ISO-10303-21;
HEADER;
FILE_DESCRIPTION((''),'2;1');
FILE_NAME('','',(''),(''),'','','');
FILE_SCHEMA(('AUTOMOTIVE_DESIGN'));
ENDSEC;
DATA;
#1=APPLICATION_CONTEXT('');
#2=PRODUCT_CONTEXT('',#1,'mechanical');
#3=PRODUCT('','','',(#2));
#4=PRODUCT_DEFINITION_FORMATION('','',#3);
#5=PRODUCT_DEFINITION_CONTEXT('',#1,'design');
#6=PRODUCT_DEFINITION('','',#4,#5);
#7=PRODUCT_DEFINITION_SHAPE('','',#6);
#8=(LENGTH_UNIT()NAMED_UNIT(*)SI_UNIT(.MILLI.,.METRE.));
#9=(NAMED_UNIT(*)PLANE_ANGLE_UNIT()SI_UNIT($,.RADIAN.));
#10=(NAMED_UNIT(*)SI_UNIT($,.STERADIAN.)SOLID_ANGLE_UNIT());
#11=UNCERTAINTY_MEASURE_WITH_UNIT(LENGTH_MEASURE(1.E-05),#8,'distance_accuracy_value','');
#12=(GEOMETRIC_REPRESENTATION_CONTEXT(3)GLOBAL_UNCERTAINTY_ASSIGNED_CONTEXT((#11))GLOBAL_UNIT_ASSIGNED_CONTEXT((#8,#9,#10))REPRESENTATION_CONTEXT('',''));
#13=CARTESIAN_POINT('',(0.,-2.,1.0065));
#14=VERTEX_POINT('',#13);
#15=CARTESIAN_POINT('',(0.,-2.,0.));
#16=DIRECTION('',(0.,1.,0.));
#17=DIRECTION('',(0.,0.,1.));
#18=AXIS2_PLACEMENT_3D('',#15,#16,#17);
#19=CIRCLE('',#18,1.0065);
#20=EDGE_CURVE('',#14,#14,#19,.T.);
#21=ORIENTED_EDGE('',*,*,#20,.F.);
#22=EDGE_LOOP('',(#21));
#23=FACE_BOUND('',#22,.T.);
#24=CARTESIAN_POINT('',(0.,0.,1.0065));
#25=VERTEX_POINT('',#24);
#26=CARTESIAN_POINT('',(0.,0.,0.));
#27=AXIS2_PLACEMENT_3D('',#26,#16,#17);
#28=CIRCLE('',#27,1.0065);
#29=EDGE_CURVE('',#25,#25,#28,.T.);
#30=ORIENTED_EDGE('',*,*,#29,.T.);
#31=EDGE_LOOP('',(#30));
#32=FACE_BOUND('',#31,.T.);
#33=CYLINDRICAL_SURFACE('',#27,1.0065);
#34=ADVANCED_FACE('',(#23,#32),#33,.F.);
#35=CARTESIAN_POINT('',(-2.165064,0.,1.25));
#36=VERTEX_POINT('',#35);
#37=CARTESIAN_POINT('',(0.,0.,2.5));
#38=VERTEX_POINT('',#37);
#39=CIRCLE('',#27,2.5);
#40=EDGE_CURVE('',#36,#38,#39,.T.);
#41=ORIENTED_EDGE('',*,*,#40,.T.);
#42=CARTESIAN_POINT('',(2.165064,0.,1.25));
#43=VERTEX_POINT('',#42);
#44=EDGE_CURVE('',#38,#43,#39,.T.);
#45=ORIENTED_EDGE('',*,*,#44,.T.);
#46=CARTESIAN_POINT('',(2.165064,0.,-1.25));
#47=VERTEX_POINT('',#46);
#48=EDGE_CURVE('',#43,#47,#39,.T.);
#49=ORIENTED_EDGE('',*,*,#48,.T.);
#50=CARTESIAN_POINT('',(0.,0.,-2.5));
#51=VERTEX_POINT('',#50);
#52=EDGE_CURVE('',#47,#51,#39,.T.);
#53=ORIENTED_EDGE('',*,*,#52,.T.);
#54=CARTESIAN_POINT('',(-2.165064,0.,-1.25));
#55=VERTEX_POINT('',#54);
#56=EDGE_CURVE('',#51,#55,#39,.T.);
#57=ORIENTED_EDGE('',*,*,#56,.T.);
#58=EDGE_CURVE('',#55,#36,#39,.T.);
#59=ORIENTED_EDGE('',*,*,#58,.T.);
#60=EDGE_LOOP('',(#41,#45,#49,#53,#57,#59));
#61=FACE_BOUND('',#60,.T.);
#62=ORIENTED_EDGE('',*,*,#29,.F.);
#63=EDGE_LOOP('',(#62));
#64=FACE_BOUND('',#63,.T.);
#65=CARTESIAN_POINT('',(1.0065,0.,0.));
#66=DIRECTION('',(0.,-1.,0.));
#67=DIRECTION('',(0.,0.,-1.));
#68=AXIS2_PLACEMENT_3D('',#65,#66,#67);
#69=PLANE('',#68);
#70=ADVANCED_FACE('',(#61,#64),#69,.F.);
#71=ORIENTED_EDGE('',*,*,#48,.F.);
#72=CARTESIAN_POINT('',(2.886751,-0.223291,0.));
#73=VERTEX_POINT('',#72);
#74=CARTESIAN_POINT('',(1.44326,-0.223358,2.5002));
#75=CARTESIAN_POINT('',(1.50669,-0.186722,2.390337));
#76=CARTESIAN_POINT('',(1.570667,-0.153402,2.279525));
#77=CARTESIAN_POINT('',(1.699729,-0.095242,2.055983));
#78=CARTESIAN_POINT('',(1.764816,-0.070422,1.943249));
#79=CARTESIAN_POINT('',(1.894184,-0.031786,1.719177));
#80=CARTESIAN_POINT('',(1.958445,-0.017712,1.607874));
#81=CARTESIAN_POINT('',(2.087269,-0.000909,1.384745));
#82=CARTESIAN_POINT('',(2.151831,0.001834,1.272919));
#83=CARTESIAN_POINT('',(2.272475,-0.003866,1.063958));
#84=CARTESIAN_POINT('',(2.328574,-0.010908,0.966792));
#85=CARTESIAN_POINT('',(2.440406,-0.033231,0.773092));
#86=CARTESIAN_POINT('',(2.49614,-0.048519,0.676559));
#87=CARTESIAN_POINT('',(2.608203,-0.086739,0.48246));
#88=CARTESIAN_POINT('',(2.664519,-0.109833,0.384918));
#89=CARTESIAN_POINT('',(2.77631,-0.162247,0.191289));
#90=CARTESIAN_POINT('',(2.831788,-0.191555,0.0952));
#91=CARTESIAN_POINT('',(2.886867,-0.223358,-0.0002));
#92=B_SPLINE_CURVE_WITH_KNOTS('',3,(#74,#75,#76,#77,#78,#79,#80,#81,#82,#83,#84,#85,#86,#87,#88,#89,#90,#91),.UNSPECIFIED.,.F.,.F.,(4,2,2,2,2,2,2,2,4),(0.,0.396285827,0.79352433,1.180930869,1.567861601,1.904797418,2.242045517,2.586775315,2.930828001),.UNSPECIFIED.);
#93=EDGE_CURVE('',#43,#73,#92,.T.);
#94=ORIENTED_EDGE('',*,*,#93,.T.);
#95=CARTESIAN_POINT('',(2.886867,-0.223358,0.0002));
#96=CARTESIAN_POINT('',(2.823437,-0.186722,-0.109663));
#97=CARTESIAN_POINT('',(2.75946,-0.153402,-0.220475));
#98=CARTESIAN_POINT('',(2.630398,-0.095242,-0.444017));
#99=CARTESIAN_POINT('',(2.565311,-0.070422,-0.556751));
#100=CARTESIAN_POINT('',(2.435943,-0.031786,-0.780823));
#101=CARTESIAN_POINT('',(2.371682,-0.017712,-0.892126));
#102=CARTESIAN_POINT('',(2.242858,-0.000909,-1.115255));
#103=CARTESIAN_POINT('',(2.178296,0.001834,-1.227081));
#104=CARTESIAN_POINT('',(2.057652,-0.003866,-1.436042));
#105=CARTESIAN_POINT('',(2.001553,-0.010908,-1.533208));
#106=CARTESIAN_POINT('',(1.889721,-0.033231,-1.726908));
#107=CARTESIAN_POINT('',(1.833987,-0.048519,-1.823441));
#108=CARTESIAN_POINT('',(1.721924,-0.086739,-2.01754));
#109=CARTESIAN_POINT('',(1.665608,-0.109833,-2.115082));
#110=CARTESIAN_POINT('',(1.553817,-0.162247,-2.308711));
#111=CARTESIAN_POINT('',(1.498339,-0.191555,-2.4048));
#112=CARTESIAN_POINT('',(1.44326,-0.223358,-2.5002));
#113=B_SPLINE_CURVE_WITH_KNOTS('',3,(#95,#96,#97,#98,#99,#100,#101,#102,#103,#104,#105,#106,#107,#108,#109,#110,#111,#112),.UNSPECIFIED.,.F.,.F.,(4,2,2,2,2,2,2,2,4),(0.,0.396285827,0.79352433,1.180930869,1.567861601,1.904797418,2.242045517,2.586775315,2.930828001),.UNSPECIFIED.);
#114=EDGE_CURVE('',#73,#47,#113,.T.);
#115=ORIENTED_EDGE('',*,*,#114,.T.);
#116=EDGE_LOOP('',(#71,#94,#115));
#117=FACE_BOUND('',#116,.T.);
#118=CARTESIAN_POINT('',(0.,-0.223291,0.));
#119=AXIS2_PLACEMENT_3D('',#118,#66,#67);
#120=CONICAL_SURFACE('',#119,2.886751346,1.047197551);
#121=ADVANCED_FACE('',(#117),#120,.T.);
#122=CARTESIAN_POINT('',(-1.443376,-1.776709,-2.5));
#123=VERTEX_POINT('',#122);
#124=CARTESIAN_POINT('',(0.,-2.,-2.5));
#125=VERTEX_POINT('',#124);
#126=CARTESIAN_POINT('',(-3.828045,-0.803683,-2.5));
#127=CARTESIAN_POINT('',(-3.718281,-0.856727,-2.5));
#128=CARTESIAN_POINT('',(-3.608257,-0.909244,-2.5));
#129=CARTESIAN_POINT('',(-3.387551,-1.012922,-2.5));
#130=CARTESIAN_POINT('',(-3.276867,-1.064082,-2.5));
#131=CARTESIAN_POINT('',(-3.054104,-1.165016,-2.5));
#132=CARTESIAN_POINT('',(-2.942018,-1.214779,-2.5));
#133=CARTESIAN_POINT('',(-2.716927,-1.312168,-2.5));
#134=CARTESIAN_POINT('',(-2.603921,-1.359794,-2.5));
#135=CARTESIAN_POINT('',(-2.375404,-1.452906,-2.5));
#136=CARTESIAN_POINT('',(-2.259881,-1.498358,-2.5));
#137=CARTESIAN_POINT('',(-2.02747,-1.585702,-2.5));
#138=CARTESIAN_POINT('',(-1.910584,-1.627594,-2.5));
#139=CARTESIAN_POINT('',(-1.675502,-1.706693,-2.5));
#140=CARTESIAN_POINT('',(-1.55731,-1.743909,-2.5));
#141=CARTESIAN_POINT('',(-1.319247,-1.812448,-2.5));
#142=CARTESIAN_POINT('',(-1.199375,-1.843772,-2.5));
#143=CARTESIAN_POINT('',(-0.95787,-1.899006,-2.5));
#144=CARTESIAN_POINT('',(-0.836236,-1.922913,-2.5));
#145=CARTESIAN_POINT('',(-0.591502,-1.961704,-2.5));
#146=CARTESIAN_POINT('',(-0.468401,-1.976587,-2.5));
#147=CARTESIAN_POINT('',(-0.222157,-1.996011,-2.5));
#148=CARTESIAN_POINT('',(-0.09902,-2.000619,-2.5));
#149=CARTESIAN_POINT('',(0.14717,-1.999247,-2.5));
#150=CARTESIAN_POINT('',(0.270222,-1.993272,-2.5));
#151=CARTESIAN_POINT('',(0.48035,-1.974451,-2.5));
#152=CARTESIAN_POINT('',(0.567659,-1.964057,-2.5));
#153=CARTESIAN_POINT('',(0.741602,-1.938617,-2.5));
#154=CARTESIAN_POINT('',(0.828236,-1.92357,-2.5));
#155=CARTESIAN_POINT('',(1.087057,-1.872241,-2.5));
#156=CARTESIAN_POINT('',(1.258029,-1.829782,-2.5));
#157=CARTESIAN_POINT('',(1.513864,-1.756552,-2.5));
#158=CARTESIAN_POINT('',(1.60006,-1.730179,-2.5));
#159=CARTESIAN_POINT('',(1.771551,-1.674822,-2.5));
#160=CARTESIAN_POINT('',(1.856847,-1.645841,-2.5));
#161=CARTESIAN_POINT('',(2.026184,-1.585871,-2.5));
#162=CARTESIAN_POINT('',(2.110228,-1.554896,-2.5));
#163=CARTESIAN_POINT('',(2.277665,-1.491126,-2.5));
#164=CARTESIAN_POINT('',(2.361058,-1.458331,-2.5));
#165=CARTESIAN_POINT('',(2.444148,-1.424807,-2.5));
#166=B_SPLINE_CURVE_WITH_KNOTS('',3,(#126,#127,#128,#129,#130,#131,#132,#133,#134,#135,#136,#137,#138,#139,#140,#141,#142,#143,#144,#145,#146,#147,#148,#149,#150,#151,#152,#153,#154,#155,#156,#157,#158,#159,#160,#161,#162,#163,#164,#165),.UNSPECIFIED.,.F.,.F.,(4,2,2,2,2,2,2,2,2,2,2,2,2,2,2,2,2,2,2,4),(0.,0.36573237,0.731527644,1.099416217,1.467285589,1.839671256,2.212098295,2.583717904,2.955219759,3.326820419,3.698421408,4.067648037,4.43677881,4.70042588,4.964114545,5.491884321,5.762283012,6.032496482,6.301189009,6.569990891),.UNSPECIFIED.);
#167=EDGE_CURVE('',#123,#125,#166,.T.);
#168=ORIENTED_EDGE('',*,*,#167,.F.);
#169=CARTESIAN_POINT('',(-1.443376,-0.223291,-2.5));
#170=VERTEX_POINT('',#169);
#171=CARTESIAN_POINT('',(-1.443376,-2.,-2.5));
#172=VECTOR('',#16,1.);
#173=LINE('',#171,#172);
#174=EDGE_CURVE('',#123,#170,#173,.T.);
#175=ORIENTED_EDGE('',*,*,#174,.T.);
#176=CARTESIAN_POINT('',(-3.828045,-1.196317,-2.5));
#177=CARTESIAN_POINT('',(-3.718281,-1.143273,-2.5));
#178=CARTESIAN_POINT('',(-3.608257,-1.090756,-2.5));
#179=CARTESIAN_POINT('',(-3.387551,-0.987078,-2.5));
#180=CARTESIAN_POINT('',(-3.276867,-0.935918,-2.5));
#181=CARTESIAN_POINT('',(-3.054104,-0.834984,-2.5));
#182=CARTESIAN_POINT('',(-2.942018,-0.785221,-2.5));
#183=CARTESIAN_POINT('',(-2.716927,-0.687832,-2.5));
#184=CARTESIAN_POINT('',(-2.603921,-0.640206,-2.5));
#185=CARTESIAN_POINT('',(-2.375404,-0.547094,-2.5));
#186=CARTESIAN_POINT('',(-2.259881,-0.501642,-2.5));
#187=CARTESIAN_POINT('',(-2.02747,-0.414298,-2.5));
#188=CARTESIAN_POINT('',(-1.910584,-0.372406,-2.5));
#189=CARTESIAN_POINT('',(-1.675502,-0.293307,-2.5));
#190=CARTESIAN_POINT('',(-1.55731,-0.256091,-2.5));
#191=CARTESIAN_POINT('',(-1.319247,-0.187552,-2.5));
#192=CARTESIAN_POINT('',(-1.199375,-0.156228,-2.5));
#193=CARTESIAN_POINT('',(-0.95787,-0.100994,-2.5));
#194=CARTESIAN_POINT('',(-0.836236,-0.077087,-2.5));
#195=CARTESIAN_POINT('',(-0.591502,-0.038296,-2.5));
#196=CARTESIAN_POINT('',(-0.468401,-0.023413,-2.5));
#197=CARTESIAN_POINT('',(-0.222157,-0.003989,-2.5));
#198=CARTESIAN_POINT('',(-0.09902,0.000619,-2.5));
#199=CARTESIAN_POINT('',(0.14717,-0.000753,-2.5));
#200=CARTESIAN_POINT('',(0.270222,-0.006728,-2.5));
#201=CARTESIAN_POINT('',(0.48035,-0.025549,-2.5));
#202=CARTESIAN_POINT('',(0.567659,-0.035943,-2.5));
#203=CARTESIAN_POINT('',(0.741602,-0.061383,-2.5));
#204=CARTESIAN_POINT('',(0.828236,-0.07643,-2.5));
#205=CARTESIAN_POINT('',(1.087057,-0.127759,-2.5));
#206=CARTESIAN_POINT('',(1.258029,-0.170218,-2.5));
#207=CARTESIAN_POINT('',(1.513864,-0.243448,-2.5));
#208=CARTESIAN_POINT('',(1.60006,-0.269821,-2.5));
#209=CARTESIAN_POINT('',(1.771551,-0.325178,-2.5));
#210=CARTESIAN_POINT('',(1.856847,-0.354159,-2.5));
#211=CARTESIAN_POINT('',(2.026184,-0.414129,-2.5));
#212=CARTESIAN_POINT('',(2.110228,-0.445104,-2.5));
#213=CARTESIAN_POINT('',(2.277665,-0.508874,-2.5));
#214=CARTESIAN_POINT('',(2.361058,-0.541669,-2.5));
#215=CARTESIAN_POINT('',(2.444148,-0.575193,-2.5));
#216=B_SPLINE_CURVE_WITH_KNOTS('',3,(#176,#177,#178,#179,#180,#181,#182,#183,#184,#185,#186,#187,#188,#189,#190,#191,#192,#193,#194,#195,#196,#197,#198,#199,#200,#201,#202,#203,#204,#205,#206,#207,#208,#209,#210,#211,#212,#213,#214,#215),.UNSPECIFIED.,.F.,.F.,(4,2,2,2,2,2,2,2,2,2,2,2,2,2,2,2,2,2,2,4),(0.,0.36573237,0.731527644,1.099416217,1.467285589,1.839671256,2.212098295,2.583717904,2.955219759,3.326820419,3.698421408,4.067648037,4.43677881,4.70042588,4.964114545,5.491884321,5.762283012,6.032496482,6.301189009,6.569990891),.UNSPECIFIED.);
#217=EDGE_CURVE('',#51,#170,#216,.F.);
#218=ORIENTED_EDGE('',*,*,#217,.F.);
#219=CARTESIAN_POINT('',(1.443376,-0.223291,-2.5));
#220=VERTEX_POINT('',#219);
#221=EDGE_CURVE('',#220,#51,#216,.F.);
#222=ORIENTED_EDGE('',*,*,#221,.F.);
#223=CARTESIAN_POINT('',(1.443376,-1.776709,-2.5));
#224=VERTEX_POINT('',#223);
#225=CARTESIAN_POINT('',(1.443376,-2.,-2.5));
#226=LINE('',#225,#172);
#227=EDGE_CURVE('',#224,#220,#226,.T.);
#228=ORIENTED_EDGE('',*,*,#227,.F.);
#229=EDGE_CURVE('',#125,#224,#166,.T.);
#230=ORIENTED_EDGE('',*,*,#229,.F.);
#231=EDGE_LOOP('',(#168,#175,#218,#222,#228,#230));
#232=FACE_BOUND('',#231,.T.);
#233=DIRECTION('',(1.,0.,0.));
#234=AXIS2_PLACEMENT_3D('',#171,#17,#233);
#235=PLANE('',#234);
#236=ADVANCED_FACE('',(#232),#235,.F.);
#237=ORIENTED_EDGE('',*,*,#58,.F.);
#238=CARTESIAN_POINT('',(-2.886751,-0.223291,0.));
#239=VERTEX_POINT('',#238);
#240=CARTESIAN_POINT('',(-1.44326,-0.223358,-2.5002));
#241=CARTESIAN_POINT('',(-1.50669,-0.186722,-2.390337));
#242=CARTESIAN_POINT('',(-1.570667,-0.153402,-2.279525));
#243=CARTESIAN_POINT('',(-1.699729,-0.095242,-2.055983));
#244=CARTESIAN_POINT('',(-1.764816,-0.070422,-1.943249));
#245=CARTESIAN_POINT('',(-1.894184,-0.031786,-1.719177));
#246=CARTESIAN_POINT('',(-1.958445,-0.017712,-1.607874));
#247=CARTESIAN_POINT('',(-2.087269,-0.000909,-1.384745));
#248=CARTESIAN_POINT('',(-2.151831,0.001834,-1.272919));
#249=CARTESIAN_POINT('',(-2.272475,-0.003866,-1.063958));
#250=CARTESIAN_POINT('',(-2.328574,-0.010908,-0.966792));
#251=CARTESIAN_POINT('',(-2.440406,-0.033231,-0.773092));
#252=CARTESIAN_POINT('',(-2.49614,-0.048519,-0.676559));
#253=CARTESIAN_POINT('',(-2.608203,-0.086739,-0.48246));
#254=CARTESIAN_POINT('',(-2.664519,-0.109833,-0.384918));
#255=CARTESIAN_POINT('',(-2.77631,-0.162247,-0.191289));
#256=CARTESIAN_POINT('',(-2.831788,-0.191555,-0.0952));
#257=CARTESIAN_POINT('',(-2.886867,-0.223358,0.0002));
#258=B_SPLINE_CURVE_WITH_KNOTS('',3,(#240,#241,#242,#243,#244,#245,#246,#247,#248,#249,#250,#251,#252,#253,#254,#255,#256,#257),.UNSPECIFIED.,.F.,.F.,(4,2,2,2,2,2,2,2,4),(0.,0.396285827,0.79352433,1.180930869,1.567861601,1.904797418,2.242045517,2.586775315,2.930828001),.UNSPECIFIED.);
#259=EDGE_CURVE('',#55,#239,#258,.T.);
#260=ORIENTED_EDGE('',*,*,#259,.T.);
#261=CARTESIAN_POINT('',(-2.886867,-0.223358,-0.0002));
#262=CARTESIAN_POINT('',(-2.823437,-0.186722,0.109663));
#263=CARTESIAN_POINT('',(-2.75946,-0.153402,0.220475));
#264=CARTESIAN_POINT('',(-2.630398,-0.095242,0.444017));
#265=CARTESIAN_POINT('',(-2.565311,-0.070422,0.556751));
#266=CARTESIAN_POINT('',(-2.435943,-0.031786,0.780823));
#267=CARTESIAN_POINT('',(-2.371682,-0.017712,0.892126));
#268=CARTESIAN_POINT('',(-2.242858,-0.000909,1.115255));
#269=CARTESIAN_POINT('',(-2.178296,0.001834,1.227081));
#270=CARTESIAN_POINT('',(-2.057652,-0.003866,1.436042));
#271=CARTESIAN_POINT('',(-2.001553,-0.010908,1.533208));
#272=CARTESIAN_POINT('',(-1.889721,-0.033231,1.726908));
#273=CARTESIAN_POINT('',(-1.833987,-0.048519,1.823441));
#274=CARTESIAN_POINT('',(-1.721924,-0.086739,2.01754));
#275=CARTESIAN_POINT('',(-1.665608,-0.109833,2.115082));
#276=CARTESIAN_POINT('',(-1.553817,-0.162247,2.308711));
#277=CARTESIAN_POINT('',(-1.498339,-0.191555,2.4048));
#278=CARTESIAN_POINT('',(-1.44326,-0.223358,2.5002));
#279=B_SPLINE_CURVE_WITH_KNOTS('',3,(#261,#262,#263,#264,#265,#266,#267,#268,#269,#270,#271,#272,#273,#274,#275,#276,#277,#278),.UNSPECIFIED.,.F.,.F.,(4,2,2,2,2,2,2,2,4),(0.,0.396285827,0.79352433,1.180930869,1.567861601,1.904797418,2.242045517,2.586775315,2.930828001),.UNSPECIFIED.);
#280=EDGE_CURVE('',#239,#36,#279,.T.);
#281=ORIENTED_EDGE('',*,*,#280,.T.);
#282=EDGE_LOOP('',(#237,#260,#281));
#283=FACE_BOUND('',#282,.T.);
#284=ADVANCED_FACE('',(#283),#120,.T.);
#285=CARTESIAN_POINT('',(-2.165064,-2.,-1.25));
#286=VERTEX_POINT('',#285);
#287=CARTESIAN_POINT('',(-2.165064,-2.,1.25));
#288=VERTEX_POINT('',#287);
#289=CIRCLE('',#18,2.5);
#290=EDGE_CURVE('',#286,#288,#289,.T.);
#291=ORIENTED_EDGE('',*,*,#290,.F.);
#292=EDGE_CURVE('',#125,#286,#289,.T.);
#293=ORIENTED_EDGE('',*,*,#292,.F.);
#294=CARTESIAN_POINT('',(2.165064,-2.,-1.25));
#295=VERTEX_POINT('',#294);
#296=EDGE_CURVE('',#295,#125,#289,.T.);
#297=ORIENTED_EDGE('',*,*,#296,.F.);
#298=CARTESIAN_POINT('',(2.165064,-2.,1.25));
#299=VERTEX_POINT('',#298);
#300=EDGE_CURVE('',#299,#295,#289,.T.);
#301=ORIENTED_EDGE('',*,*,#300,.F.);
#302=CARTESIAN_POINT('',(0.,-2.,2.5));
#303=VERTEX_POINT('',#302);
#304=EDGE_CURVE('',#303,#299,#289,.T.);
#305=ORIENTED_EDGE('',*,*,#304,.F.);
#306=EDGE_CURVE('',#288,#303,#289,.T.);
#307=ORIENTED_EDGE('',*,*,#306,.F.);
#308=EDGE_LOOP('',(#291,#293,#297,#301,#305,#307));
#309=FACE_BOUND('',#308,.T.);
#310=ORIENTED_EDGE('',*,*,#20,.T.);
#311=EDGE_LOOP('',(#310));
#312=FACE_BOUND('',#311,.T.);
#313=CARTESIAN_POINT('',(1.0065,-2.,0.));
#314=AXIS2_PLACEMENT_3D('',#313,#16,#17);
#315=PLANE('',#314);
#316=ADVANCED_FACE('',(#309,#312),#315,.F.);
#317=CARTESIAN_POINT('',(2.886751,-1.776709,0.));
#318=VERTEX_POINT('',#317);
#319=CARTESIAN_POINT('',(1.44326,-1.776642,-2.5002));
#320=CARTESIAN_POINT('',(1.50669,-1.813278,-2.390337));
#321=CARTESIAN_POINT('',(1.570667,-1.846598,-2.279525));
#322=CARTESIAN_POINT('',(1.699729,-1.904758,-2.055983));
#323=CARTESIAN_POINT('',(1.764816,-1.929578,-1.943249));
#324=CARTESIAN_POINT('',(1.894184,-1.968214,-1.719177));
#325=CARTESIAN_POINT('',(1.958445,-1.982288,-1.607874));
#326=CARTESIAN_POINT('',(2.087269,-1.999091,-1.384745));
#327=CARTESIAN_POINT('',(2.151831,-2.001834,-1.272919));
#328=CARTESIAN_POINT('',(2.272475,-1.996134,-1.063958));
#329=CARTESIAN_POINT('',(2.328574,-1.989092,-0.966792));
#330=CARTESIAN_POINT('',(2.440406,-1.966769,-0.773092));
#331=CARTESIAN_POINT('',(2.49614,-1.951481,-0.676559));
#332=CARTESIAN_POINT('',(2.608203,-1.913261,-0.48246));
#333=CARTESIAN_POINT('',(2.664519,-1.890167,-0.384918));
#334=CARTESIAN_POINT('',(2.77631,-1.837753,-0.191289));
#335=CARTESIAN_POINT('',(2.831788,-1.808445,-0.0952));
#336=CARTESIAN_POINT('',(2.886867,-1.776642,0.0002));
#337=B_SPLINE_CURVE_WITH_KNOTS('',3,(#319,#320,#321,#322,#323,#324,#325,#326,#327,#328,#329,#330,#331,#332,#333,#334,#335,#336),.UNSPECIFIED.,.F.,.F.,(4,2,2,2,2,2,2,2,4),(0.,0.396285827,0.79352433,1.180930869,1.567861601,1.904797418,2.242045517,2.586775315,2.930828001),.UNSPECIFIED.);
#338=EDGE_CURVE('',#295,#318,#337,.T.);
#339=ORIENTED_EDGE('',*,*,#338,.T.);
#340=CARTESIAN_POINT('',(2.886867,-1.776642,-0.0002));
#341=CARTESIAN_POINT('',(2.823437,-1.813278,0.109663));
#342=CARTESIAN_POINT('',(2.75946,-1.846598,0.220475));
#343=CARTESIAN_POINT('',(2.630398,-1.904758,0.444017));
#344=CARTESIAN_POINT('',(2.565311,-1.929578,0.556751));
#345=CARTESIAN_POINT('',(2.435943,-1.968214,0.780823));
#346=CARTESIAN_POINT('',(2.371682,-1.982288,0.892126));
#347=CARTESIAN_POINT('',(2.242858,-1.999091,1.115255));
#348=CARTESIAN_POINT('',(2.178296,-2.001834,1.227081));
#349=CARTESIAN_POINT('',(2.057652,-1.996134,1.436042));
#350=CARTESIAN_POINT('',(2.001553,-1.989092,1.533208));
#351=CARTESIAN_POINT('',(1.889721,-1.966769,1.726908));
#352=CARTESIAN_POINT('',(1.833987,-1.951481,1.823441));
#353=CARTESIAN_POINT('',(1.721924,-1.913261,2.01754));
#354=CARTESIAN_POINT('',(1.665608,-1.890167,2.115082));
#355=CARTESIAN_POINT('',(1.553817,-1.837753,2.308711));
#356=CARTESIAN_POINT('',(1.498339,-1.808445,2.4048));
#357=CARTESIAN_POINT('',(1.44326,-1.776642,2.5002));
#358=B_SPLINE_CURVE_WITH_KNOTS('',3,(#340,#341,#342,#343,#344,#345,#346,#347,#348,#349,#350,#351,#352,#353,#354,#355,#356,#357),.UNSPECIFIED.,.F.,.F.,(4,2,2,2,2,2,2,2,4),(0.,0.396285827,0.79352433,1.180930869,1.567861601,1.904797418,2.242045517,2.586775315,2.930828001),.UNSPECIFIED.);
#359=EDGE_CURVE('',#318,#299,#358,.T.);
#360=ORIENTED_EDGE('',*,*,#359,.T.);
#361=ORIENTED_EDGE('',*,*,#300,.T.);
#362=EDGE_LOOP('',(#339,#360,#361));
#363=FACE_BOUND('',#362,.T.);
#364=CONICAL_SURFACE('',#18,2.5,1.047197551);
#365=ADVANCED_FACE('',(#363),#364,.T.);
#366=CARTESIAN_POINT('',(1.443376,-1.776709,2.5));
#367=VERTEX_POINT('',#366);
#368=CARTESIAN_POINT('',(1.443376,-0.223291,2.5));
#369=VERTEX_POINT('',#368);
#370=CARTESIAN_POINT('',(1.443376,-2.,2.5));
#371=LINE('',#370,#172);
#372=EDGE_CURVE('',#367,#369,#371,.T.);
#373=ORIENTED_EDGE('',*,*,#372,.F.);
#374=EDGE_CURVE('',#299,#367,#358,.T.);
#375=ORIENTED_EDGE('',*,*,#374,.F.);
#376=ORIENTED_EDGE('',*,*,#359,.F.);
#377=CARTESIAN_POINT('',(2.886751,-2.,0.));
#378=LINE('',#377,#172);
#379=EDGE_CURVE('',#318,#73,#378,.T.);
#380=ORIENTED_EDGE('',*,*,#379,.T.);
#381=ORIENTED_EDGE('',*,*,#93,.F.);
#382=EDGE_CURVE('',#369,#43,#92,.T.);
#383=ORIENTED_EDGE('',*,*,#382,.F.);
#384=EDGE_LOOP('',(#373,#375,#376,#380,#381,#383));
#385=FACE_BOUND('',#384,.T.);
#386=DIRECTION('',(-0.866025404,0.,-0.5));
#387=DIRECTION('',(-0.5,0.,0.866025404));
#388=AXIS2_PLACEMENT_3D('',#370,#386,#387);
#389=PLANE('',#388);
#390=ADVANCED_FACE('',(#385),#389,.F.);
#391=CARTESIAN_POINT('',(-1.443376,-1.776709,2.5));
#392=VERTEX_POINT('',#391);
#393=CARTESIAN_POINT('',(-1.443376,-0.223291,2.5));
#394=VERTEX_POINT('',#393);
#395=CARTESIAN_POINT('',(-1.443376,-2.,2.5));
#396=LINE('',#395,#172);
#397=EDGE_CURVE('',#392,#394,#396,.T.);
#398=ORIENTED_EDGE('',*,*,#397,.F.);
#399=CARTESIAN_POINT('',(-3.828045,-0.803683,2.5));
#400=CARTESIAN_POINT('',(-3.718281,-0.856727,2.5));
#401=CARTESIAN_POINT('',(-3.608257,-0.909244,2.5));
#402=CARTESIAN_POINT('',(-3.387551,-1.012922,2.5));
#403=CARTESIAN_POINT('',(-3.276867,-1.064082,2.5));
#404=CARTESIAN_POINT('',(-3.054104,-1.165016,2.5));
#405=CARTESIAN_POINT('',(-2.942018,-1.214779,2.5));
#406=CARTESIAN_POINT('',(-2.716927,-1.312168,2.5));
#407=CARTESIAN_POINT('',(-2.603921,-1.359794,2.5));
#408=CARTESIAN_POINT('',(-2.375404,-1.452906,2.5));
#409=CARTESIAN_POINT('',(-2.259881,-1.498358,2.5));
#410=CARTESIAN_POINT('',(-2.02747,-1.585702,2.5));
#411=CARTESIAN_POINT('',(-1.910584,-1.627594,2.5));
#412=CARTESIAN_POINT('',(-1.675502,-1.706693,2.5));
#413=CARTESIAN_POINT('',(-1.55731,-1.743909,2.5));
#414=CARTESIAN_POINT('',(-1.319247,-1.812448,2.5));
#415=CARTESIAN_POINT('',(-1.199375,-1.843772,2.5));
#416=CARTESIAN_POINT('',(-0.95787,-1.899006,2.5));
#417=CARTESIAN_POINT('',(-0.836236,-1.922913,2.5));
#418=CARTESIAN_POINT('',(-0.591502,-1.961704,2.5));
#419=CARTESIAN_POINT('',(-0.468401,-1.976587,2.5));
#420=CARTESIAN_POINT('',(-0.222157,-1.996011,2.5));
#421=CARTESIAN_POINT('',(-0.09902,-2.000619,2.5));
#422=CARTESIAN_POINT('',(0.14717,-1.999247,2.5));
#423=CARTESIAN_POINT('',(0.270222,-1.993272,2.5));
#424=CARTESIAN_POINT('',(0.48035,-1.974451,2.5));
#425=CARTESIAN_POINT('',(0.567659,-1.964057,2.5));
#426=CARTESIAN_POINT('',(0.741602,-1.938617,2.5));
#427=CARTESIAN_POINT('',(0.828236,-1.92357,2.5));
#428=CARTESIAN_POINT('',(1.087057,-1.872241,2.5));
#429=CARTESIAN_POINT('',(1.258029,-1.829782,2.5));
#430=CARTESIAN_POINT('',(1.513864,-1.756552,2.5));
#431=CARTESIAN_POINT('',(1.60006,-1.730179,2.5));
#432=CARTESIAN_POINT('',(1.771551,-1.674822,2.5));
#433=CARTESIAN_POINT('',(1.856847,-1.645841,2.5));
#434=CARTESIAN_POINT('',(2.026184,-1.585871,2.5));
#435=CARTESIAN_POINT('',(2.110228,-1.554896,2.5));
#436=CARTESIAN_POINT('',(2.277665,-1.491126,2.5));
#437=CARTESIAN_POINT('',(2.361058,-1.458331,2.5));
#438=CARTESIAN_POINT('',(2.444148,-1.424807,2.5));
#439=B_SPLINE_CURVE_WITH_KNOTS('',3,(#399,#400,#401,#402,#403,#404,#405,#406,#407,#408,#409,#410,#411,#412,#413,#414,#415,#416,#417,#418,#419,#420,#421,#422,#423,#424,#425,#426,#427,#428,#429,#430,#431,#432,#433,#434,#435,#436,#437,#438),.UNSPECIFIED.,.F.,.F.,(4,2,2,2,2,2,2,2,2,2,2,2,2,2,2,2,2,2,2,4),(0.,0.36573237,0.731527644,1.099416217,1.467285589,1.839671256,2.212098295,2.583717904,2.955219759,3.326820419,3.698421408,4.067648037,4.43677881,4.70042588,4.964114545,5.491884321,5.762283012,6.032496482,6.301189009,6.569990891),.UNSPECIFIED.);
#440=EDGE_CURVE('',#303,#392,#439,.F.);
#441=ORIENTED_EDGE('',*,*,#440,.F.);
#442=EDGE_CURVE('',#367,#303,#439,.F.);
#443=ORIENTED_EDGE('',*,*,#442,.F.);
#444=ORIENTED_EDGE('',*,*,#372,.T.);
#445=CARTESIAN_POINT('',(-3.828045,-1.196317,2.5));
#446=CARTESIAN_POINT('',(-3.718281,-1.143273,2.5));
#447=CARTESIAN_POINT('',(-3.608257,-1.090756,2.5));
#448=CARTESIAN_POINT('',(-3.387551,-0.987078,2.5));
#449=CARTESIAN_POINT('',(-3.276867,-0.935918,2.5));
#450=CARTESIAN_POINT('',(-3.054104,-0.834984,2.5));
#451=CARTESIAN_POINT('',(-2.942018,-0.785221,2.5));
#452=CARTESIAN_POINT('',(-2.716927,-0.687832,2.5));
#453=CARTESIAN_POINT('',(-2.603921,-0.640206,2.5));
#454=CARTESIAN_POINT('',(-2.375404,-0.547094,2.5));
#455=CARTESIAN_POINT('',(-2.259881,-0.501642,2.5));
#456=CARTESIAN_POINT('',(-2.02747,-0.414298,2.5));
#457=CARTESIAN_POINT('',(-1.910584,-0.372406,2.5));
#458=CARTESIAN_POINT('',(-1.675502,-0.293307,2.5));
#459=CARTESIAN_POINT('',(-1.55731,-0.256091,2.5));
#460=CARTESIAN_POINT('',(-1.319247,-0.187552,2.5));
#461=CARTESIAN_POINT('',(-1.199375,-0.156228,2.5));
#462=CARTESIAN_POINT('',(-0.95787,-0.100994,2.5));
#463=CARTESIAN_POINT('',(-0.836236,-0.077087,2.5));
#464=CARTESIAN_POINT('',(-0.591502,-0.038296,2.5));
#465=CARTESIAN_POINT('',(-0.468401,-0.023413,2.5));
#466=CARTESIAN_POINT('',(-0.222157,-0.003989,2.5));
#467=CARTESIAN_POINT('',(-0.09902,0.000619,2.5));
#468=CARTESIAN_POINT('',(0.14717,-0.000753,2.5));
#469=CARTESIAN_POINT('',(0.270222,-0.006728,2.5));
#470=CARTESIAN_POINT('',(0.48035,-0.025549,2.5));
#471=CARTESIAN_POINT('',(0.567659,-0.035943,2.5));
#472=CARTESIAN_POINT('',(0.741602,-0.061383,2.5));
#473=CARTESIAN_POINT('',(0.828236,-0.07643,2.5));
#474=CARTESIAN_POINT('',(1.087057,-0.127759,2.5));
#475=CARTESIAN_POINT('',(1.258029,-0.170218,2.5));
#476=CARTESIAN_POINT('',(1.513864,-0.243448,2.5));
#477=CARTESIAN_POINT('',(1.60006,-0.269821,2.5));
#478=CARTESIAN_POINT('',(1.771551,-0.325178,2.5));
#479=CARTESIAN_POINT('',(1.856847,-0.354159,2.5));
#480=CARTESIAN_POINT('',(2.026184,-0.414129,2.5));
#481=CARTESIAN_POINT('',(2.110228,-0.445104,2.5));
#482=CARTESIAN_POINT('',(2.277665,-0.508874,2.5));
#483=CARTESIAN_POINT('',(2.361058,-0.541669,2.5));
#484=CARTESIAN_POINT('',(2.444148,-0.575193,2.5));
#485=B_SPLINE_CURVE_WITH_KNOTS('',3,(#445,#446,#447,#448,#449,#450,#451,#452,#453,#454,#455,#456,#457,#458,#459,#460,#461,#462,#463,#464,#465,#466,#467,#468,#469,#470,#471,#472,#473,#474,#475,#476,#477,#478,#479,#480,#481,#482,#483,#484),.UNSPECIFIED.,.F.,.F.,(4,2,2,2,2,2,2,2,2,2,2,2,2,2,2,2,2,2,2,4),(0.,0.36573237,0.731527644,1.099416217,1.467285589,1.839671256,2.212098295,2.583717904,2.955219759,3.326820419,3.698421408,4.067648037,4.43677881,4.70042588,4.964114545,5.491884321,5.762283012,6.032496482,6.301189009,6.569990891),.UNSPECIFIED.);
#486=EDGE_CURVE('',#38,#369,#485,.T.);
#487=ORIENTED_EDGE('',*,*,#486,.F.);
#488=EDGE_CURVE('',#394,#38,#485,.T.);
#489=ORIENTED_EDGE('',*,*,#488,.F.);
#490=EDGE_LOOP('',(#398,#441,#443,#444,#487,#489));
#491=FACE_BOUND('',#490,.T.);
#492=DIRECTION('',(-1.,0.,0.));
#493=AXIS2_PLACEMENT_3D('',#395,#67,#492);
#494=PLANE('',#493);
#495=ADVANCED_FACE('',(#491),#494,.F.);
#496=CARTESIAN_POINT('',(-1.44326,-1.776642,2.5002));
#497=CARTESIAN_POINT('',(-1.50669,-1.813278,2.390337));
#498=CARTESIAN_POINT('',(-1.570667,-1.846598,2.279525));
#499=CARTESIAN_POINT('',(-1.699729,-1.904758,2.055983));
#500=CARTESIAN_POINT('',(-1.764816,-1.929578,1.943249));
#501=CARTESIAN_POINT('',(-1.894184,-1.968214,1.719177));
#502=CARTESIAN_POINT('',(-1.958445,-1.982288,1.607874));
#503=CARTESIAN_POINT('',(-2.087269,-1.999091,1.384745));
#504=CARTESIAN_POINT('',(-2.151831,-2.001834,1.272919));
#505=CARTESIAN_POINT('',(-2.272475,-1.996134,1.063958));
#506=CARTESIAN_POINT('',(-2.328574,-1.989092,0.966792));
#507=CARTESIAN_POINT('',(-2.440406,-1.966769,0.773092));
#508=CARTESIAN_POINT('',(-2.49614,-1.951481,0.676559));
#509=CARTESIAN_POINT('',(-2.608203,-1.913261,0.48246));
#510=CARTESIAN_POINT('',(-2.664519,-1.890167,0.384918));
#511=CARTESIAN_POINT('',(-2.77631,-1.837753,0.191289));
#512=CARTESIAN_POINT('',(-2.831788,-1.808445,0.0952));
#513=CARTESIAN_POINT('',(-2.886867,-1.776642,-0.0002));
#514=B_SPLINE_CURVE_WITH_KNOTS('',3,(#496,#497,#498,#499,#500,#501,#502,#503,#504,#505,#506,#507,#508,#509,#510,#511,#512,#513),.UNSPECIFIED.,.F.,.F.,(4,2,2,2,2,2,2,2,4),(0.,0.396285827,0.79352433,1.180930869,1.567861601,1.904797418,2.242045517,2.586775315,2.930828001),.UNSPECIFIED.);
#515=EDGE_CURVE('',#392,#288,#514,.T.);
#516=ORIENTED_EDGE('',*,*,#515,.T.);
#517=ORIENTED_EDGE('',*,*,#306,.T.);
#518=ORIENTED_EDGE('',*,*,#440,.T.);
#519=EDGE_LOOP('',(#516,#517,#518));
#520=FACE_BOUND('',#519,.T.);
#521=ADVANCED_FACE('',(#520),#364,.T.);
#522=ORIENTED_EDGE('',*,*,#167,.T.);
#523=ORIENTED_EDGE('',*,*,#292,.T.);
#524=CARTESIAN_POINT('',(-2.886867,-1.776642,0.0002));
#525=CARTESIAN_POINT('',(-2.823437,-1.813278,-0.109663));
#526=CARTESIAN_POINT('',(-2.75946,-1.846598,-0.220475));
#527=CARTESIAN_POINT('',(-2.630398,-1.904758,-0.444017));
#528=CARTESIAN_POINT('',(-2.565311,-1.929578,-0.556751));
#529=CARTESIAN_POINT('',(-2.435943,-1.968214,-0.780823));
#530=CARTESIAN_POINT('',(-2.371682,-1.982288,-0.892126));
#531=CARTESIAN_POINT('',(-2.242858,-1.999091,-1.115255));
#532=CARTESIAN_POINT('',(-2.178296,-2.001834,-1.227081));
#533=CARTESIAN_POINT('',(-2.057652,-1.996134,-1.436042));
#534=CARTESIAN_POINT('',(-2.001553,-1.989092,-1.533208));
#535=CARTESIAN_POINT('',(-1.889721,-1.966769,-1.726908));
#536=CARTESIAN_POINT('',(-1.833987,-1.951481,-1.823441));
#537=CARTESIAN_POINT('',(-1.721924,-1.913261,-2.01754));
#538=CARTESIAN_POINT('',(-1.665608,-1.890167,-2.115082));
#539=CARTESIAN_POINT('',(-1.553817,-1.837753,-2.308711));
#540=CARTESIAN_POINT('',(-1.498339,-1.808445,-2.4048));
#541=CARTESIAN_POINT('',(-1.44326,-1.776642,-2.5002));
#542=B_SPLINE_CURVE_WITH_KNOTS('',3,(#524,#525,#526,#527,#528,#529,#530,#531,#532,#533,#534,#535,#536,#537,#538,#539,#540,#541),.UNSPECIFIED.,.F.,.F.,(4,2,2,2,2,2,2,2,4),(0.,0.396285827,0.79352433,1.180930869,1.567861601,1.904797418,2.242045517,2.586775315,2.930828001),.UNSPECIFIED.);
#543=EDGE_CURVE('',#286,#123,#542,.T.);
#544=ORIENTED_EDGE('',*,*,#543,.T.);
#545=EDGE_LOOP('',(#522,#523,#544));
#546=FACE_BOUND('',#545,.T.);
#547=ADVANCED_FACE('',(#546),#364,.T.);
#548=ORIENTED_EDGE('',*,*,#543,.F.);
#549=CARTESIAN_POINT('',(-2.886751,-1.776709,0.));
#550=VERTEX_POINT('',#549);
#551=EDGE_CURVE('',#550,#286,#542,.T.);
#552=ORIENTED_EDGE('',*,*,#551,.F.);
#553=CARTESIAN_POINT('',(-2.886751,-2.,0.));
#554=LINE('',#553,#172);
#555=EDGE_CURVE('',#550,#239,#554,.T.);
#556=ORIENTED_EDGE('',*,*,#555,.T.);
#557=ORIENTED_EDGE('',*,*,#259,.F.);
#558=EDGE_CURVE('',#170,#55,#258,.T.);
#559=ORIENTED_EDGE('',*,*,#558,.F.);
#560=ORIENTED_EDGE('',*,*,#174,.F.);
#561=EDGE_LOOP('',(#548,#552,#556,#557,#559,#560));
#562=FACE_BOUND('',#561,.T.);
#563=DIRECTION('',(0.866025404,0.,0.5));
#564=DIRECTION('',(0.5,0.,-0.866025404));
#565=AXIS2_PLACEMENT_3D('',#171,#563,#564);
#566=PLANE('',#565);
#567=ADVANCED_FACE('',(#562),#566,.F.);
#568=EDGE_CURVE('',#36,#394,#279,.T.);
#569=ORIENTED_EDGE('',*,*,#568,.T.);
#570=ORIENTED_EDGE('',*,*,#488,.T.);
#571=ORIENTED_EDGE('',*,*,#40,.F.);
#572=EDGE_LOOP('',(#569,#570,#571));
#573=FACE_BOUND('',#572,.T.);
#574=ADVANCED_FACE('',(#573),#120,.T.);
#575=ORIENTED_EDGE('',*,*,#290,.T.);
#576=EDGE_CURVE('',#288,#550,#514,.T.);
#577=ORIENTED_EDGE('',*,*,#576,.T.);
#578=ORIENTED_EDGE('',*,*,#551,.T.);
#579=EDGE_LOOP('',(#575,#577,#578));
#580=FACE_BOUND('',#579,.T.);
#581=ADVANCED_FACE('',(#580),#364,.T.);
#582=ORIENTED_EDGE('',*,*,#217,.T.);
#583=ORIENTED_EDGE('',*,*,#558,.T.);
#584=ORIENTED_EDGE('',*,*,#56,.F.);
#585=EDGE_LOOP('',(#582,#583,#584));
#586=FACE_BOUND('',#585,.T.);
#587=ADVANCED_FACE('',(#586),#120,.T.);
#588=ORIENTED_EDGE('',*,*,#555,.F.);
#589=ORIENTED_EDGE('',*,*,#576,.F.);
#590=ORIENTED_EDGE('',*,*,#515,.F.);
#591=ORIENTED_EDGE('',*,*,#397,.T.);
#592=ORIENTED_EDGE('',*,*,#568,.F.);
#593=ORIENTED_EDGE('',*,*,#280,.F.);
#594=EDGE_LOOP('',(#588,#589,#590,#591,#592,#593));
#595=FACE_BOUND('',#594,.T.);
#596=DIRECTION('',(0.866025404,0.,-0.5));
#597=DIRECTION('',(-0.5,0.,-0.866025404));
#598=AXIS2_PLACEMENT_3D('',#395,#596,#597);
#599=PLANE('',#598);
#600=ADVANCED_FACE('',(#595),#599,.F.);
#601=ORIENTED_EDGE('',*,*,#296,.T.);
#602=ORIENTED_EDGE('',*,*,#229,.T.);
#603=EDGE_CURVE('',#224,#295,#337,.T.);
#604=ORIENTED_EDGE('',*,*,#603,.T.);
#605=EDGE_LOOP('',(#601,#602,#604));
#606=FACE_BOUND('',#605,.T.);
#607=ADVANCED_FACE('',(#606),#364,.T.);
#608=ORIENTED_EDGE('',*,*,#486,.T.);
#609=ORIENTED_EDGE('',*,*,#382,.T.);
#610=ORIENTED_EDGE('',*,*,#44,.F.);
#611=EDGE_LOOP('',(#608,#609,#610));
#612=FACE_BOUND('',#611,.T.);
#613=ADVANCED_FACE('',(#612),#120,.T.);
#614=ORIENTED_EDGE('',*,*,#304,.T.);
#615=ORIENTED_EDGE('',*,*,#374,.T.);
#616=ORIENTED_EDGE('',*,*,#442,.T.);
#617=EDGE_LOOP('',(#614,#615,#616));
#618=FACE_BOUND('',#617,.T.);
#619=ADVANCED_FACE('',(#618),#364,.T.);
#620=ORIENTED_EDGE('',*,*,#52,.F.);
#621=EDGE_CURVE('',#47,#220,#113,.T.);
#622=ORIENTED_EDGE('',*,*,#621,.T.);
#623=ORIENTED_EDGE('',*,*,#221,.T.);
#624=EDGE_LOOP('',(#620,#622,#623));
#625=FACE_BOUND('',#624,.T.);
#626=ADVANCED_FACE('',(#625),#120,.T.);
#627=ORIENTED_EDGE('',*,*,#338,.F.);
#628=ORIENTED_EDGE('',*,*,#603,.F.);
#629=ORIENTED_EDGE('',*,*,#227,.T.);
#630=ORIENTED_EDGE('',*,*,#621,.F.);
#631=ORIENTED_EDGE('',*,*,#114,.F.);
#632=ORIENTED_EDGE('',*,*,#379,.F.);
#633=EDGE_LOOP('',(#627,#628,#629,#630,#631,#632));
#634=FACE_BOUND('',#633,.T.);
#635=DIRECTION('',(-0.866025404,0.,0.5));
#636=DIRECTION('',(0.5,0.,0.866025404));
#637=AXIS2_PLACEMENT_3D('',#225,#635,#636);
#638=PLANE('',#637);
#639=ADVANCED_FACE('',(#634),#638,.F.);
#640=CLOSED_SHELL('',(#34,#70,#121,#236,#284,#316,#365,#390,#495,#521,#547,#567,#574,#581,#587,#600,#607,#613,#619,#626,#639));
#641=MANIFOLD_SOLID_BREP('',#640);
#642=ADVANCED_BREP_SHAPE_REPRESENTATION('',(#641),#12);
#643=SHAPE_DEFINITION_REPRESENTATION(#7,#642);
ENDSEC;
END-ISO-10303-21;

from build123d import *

# Parameters (mm, degrees)
SCHNITT_LINEAR_START            = -1e-07
SCHNITT_LINEAR_AUSTRAGEN1_DEPTH = 1.999992134


# Read off the part's stored shape, not the designer's step: Schnitt-Linear austragen1
with BuildPart() as part:
    # Skizze1 → Basis-Rotation (revolve)
    with BuildSketch(Plane.XY, mode=Mode.PRIVATE) as basis_rotation_sk:
        Polygon((1.0065, 0), (2.5, 0), (2.886751346, -0.223290994), (2.886751346, -1.776709006), (2.5, -2), (1.0065, -2), align=None)
    revolve(basis_rotation_sk.sketch.rotate(Axis((0, 0, 0), (0, -1, 0)), 90), axis=Axis((0, 0, 0), (0, -1, 0)))

    # Schnitt-Linear austragen1 outline → Schnitt-Linear austragen1 (cut)
    with BuildSketch(Plane.XZ.offset(SCHNITT_LINEAR_START)):
        with BuildLine():
            ThreePointArc((-1.443375673, -2.5), (0, -2.886751346), (1.443375673, -2.5))
            Line((1.443375673, -2.5), (-1.443375673, -2.5))
        make_face()
        with BuildLine():
            Line((2.886751346, 0), (1.443375673, -2.5))
            ThreePointArc((1.443375673, -2.5), (2.5, -1.443375673), (2.886751346, 0))
        make_face()
        with BuildLine():
            ThreePointArc((-2.886751346, 0), (-2.5, -1.443375673), (-1.443375673, -2.5))
            Line((-1.443375673, -2.5), (-2.886751346, 0))
        make_face()
        with BuildLine():
            Line((1.443375673, 2.5), (2.886751346, 0))
            ThreePointArc((2.886751346, 0), (2.5, 1.443375673), (1.443375673, 2.5))
        make_face()
        with BuildLine():
            ThreePointArc((-1.443375673, 2.5), (-2.5, 1.443375673), (-2.886751346, 0))
            Line((-2.886751346, 0), (-1.443375673, 2.5))
        make_face()
        with BuildLine():
            Line((-1.443375673, 2.5), (1.443375673, 2.5))
            ThreePointArc((1.443375673, 2.5), (0, 2.886751346), (-1.443375673, 2.5))
        make_face()
    extrude(amount=SCHNITT_LINEAR_AUSTRAGEN1_DEPTH, mode=Mode.SUBTRACT)


solid = part.part
